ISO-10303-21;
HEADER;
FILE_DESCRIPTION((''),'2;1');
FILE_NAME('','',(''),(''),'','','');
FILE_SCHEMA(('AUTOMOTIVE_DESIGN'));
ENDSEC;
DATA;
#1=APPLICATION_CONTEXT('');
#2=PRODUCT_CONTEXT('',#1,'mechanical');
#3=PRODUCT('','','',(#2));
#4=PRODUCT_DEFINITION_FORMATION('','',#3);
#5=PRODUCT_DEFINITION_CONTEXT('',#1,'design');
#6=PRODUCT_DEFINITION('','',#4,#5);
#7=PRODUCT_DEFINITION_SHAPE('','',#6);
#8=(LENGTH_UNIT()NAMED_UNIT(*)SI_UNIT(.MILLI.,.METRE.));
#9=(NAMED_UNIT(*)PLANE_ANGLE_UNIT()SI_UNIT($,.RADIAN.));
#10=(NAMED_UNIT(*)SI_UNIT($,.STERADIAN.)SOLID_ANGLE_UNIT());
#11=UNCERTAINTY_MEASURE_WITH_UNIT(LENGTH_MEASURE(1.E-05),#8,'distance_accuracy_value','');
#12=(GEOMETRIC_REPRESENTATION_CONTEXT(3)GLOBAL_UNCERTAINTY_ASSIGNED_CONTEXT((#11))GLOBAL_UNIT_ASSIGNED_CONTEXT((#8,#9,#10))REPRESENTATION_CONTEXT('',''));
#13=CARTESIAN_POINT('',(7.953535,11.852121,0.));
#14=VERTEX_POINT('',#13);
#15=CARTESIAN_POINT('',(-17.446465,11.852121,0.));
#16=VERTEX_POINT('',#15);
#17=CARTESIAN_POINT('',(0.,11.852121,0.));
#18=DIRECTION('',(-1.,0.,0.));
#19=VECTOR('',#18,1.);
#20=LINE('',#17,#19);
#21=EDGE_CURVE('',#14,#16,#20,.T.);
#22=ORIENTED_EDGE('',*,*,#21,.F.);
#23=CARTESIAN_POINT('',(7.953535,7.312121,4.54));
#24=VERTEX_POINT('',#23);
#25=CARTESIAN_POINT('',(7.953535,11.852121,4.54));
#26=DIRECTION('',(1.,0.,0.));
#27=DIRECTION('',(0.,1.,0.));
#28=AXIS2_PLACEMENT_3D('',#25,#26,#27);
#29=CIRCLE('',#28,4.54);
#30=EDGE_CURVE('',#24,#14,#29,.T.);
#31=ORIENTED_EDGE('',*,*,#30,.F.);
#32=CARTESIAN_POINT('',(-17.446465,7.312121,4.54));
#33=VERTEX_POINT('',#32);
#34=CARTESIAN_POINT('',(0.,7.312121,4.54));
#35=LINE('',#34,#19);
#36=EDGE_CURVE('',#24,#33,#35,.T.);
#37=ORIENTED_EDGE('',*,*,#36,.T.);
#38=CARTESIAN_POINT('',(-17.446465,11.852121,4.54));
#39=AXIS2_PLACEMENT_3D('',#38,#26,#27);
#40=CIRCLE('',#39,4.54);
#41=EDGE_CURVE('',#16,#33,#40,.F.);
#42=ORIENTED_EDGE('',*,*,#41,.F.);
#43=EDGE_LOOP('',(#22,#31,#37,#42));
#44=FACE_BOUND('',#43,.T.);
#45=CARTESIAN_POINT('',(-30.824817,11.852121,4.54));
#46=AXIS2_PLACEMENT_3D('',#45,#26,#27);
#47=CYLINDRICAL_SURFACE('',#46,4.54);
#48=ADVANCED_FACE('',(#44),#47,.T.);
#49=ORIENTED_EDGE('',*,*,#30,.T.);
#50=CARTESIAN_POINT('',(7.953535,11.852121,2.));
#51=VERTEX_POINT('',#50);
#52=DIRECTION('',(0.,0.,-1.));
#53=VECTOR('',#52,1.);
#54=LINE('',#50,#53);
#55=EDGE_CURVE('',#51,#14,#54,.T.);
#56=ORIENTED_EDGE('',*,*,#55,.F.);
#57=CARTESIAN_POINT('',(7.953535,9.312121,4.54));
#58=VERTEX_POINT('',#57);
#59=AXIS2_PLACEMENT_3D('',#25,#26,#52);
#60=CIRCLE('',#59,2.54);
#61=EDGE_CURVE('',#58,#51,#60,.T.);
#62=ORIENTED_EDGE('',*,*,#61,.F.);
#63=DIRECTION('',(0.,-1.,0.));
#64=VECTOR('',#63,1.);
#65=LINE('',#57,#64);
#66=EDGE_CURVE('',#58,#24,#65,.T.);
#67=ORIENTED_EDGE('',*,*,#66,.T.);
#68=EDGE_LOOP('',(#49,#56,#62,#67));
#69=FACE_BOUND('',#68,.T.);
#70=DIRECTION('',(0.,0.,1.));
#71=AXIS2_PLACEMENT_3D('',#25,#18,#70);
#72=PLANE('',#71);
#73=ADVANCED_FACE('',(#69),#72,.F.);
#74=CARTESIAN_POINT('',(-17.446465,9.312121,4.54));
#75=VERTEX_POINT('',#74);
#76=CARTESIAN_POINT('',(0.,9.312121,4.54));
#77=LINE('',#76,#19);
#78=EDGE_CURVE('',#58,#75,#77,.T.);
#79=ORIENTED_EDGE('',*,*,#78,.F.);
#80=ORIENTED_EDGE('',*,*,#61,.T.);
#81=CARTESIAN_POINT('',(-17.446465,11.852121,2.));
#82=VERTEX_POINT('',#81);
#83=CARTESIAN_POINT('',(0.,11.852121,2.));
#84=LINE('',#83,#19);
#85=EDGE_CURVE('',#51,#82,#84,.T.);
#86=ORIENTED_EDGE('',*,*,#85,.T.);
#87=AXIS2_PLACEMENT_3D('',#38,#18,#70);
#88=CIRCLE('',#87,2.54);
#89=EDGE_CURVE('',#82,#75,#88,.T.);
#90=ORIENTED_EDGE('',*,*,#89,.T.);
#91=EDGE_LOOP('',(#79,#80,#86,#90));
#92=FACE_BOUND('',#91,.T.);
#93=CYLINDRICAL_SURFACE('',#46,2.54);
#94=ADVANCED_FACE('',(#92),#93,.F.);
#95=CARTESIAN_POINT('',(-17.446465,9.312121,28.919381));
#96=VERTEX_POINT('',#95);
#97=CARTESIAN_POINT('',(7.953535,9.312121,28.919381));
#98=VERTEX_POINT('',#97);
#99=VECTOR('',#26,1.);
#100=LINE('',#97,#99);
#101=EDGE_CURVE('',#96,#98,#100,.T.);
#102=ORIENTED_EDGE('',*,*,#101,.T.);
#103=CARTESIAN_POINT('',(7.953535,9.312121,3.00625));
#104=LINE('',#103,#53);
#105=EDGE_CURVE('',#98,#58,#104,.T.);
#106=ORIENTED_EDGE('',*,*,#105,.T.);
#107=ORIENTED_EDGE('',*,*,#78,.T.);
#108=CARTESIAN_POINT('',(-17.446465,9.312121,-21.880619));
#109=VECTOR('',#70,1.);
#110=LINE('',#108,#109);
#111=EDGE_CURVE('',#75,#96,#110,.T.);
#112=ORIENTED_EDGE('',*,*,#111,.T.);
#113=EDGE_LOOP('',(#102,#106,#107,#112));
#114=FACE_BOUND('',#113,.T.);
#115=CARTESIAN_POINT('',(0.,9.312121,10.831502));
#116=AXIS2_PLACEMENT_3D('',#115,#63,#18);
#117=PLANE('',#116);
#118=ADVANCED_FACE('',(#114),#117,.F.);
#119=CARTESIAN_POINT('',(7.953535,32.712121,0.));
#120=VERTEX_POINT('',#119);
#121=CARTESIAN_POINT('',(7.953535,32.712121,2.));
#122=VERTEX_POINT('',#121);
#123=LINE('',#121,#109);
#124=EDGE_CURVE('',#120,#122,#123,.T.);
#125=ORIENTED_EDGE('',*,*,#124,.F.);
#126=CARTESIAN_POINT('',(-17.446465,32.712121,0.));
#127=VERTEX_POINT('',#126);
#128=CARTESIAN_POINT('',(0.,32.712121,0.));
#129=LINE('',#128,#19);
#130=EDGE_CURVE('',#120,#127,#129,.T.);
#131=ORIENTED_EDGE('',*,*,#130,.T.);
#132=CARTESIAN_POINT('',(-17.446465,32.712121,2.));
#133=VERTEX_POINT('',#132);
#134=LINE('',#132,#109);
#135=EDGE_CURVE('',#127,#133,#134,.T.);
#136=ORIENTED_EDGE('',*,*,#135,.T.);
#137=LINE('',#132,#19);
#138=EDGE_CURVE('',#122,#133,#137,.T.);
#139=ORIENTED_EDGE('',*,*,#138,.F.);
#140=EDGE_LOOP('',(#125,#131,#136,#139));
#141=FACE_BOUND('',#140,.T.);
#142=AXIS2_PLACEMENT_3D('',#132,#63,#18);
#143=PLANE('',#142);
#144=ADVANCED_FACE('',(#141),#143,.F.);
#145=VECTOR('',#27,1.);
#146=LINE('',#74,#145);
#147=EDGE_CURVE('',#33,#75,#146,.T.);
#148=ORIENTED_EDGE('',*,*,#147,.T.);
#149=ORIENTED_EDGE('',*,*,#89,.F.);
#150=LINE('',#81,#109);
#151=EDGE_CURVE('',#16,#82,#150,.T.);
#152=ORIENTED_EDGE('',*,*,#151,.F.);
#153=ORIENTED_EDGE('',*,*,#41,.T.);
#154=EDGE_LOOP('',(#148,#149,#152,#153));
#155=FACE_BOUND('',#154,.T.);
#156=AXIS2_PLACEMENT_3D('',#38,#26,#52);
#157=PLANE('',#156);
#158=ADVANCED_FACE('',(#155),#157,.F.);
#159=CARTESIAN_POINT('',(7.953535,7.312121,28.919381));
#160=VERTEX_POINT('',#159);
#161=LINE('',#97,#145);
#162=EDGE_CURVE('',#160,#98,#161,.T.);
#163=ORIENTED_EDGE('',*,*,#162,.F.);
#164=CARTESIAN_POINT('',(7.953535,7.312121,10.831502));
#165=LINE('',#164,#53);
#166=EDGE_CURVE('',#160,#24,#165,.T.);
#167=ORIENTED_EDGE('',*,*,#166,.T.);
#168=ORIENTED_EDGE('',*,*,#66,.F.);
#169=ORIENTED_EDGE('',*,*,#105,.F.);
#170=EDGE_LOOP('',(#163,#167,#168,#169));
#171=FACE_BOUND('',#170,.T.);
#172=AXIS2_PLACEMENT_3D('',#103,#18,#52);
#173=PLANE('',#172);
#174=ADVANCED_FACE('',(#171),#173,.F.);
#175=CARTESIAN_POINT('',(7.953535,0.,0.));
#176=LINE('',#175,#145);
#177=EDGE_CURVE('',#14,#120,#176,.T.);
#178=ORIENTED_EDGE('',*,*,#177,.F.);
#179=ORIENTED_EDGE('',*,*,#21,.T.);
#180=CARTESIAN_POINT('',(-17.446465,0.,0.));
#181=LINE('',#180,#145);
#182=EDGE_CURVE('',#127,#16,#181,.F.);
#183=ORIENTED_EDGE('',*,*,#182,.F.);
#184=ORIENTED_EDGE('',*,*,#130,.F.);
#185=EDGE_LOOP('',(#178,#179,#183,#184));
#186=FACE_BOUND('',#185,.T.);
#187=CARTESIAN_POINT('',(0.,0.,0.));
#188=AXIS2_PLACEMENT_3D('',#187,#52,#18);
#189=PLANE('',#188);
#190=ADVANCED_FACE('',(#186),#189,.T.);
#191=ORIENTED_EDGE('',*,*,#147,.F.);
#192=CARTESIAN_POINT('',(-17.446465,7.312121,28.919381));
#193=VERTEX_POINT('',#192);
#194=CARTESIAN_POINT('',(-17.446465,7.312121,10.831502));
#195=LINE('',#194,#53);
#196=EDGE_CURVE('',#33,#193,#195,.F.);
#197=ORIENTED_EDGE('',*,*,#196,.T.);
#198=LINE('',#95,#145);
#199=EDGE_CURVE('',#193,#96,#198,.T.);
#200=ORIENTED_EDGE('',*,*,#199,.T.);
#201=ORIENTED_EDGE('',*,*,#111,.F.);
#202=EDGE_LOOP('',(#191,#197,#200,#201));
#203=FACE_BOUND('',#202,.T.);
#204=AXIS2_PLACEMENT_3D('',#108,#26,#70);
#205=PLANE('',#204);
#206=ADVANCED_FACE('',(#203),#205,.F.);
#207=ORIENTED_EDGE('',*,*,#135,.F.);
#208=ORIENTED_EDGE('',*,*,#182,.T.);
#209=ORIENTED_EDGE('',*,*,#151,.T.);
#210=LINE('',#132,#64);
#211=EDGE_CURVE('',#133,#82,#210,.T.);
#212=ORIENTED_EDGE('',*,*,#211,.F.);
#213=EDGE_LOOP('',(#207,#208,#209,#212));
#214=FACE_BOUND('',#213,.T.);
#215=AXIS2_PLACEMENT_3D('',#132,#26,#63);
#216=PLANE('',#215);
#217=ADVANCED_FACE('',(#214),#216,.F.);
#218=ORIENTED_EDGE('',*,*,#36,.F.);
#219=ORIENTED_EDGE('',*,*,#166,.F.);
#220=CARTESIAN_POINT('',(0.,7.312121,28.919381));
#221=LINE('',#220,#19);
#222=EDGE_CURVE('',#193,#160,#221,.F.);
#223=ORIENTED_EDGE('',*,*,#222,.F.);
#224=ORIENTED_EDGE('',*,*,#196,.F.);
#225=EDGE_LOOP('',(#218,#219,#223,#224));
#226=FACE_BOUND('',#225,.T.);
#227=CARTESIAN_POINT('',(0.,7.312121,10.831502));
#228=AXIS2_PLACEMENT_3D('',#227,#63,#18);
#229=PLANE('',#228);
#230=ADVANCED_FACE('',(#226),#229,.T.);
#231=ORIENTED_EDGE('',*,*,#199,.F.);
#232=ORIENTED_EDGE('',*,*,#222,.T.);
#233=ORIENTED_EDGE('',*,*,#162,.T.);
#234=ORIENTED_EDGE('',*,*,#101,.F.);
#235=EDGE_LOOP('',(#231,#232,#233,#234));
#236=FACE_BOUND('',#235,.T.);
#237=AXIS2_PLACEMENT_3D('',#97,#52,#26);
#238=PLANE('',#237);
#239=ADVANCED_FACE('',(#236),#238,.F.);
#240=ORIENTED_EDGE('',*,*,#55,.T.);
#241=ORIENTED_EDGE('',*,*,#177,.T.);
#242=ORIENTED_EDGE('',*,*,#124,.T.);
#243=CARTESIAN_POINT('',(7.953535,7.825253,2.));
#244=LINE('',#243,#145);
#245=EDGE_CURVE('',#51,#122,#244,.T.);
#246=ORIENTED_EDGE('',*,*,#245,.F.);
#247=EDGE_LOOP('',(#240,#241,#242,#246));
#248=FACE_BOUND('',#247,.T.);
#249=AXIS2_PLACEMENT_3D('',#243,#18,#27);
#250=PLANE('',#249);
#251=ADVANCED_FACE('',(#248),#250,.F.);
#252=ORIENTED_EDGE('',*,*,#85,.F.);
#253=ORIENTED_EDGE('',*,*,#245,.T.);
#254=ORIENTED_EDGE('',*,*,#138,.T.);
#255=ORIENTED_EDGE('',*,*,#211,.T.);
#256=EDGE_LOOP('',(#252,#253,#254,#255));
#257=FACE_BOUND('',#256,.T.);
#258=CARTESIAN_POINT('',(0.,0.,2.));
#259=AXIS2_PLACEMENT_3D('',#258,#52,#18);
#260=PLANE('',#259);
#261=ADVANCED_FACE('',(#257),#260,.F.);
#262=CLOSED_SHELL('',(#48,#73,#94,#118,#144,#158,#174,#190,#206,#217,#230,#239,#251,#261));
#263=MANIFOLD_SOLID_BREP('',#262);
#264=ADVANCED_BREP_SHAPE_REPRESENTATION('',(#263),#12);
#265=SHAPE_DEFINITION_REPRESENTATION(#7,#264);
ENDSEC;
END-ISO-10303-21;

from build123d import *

# Parameters (mm, degrees)
BOSS_EXTRUDE1_DEPTH    = 2
SKETCHED_START         = -17.446464646
SKETCHED_BEND2_DEPTH   = 25.4
SKETCHED_BEND2_2_DEPTH = 25.4


# Read off the part's stored shape, not the designer's step: Sketched Bend2
with BuildPart() as part:
    # Sketch1 → Boss-Extrude1 (new body)
    with BuildSketch(Plane.XY):
        Polygon((-17.446464646, 32.712121212), (7.953535354, 32.712121212), (7.953535354, 7.825252525), (7.953535354, -18.087878788), (-17.446464646, -18.087878788), align=None)
    extrude(amount=BOSS_EXTRUDE1_DEPTH)

    # Sketched Bend2 outline → Sketched Bend2 (cut)
    with BuildSketch(Plane.YZ.offset(SKETCHED_START)):
        with BuildLine():
            ThreePointArc((11.852121212, 0), (9.721393637, 0.531059991), (8.089143668, 2))
            Line((8.089143668, 2), (-18.087878788, 2))
            Line((-18.087878788, 2), (-18.087878788, 0))
            Line((-18.087878788, 0), (11.852121212, 0))
        make_face()
    extrude(amount=SKETCHED_BEND2_DEPTH, mode=Mode.SUBTRACT)

    # Sketched Bend2 2 outline → Sketched Bend2 2 (add)
    with BuildSketch(Plane.YZ.offset(SKETCHED_START)):
        with BuildLine():
            Line((9.312121212, 4.54), (9.312121212, 28.919381003))
            Line((9.312121212, 28.919381003), (7.312121212, 28.919381003))
            Line((7.312121212, 28.919381003), (7.312121212, 4.54))
            ThreePointArc((7.312121212, 4.54), (7.510720629, 3.211903251), (8.089143668, 2))
            Line((8.089143668, 2), (11.852121212, 2))
            ThreePointArc((11.852121212, 2), (10.056069988, 2.743948776), (9.312121212, 4.54))
        make_face()
    extrude(amount=SKETCHED_BEND2_2_DEPTH)


solid = part.part
